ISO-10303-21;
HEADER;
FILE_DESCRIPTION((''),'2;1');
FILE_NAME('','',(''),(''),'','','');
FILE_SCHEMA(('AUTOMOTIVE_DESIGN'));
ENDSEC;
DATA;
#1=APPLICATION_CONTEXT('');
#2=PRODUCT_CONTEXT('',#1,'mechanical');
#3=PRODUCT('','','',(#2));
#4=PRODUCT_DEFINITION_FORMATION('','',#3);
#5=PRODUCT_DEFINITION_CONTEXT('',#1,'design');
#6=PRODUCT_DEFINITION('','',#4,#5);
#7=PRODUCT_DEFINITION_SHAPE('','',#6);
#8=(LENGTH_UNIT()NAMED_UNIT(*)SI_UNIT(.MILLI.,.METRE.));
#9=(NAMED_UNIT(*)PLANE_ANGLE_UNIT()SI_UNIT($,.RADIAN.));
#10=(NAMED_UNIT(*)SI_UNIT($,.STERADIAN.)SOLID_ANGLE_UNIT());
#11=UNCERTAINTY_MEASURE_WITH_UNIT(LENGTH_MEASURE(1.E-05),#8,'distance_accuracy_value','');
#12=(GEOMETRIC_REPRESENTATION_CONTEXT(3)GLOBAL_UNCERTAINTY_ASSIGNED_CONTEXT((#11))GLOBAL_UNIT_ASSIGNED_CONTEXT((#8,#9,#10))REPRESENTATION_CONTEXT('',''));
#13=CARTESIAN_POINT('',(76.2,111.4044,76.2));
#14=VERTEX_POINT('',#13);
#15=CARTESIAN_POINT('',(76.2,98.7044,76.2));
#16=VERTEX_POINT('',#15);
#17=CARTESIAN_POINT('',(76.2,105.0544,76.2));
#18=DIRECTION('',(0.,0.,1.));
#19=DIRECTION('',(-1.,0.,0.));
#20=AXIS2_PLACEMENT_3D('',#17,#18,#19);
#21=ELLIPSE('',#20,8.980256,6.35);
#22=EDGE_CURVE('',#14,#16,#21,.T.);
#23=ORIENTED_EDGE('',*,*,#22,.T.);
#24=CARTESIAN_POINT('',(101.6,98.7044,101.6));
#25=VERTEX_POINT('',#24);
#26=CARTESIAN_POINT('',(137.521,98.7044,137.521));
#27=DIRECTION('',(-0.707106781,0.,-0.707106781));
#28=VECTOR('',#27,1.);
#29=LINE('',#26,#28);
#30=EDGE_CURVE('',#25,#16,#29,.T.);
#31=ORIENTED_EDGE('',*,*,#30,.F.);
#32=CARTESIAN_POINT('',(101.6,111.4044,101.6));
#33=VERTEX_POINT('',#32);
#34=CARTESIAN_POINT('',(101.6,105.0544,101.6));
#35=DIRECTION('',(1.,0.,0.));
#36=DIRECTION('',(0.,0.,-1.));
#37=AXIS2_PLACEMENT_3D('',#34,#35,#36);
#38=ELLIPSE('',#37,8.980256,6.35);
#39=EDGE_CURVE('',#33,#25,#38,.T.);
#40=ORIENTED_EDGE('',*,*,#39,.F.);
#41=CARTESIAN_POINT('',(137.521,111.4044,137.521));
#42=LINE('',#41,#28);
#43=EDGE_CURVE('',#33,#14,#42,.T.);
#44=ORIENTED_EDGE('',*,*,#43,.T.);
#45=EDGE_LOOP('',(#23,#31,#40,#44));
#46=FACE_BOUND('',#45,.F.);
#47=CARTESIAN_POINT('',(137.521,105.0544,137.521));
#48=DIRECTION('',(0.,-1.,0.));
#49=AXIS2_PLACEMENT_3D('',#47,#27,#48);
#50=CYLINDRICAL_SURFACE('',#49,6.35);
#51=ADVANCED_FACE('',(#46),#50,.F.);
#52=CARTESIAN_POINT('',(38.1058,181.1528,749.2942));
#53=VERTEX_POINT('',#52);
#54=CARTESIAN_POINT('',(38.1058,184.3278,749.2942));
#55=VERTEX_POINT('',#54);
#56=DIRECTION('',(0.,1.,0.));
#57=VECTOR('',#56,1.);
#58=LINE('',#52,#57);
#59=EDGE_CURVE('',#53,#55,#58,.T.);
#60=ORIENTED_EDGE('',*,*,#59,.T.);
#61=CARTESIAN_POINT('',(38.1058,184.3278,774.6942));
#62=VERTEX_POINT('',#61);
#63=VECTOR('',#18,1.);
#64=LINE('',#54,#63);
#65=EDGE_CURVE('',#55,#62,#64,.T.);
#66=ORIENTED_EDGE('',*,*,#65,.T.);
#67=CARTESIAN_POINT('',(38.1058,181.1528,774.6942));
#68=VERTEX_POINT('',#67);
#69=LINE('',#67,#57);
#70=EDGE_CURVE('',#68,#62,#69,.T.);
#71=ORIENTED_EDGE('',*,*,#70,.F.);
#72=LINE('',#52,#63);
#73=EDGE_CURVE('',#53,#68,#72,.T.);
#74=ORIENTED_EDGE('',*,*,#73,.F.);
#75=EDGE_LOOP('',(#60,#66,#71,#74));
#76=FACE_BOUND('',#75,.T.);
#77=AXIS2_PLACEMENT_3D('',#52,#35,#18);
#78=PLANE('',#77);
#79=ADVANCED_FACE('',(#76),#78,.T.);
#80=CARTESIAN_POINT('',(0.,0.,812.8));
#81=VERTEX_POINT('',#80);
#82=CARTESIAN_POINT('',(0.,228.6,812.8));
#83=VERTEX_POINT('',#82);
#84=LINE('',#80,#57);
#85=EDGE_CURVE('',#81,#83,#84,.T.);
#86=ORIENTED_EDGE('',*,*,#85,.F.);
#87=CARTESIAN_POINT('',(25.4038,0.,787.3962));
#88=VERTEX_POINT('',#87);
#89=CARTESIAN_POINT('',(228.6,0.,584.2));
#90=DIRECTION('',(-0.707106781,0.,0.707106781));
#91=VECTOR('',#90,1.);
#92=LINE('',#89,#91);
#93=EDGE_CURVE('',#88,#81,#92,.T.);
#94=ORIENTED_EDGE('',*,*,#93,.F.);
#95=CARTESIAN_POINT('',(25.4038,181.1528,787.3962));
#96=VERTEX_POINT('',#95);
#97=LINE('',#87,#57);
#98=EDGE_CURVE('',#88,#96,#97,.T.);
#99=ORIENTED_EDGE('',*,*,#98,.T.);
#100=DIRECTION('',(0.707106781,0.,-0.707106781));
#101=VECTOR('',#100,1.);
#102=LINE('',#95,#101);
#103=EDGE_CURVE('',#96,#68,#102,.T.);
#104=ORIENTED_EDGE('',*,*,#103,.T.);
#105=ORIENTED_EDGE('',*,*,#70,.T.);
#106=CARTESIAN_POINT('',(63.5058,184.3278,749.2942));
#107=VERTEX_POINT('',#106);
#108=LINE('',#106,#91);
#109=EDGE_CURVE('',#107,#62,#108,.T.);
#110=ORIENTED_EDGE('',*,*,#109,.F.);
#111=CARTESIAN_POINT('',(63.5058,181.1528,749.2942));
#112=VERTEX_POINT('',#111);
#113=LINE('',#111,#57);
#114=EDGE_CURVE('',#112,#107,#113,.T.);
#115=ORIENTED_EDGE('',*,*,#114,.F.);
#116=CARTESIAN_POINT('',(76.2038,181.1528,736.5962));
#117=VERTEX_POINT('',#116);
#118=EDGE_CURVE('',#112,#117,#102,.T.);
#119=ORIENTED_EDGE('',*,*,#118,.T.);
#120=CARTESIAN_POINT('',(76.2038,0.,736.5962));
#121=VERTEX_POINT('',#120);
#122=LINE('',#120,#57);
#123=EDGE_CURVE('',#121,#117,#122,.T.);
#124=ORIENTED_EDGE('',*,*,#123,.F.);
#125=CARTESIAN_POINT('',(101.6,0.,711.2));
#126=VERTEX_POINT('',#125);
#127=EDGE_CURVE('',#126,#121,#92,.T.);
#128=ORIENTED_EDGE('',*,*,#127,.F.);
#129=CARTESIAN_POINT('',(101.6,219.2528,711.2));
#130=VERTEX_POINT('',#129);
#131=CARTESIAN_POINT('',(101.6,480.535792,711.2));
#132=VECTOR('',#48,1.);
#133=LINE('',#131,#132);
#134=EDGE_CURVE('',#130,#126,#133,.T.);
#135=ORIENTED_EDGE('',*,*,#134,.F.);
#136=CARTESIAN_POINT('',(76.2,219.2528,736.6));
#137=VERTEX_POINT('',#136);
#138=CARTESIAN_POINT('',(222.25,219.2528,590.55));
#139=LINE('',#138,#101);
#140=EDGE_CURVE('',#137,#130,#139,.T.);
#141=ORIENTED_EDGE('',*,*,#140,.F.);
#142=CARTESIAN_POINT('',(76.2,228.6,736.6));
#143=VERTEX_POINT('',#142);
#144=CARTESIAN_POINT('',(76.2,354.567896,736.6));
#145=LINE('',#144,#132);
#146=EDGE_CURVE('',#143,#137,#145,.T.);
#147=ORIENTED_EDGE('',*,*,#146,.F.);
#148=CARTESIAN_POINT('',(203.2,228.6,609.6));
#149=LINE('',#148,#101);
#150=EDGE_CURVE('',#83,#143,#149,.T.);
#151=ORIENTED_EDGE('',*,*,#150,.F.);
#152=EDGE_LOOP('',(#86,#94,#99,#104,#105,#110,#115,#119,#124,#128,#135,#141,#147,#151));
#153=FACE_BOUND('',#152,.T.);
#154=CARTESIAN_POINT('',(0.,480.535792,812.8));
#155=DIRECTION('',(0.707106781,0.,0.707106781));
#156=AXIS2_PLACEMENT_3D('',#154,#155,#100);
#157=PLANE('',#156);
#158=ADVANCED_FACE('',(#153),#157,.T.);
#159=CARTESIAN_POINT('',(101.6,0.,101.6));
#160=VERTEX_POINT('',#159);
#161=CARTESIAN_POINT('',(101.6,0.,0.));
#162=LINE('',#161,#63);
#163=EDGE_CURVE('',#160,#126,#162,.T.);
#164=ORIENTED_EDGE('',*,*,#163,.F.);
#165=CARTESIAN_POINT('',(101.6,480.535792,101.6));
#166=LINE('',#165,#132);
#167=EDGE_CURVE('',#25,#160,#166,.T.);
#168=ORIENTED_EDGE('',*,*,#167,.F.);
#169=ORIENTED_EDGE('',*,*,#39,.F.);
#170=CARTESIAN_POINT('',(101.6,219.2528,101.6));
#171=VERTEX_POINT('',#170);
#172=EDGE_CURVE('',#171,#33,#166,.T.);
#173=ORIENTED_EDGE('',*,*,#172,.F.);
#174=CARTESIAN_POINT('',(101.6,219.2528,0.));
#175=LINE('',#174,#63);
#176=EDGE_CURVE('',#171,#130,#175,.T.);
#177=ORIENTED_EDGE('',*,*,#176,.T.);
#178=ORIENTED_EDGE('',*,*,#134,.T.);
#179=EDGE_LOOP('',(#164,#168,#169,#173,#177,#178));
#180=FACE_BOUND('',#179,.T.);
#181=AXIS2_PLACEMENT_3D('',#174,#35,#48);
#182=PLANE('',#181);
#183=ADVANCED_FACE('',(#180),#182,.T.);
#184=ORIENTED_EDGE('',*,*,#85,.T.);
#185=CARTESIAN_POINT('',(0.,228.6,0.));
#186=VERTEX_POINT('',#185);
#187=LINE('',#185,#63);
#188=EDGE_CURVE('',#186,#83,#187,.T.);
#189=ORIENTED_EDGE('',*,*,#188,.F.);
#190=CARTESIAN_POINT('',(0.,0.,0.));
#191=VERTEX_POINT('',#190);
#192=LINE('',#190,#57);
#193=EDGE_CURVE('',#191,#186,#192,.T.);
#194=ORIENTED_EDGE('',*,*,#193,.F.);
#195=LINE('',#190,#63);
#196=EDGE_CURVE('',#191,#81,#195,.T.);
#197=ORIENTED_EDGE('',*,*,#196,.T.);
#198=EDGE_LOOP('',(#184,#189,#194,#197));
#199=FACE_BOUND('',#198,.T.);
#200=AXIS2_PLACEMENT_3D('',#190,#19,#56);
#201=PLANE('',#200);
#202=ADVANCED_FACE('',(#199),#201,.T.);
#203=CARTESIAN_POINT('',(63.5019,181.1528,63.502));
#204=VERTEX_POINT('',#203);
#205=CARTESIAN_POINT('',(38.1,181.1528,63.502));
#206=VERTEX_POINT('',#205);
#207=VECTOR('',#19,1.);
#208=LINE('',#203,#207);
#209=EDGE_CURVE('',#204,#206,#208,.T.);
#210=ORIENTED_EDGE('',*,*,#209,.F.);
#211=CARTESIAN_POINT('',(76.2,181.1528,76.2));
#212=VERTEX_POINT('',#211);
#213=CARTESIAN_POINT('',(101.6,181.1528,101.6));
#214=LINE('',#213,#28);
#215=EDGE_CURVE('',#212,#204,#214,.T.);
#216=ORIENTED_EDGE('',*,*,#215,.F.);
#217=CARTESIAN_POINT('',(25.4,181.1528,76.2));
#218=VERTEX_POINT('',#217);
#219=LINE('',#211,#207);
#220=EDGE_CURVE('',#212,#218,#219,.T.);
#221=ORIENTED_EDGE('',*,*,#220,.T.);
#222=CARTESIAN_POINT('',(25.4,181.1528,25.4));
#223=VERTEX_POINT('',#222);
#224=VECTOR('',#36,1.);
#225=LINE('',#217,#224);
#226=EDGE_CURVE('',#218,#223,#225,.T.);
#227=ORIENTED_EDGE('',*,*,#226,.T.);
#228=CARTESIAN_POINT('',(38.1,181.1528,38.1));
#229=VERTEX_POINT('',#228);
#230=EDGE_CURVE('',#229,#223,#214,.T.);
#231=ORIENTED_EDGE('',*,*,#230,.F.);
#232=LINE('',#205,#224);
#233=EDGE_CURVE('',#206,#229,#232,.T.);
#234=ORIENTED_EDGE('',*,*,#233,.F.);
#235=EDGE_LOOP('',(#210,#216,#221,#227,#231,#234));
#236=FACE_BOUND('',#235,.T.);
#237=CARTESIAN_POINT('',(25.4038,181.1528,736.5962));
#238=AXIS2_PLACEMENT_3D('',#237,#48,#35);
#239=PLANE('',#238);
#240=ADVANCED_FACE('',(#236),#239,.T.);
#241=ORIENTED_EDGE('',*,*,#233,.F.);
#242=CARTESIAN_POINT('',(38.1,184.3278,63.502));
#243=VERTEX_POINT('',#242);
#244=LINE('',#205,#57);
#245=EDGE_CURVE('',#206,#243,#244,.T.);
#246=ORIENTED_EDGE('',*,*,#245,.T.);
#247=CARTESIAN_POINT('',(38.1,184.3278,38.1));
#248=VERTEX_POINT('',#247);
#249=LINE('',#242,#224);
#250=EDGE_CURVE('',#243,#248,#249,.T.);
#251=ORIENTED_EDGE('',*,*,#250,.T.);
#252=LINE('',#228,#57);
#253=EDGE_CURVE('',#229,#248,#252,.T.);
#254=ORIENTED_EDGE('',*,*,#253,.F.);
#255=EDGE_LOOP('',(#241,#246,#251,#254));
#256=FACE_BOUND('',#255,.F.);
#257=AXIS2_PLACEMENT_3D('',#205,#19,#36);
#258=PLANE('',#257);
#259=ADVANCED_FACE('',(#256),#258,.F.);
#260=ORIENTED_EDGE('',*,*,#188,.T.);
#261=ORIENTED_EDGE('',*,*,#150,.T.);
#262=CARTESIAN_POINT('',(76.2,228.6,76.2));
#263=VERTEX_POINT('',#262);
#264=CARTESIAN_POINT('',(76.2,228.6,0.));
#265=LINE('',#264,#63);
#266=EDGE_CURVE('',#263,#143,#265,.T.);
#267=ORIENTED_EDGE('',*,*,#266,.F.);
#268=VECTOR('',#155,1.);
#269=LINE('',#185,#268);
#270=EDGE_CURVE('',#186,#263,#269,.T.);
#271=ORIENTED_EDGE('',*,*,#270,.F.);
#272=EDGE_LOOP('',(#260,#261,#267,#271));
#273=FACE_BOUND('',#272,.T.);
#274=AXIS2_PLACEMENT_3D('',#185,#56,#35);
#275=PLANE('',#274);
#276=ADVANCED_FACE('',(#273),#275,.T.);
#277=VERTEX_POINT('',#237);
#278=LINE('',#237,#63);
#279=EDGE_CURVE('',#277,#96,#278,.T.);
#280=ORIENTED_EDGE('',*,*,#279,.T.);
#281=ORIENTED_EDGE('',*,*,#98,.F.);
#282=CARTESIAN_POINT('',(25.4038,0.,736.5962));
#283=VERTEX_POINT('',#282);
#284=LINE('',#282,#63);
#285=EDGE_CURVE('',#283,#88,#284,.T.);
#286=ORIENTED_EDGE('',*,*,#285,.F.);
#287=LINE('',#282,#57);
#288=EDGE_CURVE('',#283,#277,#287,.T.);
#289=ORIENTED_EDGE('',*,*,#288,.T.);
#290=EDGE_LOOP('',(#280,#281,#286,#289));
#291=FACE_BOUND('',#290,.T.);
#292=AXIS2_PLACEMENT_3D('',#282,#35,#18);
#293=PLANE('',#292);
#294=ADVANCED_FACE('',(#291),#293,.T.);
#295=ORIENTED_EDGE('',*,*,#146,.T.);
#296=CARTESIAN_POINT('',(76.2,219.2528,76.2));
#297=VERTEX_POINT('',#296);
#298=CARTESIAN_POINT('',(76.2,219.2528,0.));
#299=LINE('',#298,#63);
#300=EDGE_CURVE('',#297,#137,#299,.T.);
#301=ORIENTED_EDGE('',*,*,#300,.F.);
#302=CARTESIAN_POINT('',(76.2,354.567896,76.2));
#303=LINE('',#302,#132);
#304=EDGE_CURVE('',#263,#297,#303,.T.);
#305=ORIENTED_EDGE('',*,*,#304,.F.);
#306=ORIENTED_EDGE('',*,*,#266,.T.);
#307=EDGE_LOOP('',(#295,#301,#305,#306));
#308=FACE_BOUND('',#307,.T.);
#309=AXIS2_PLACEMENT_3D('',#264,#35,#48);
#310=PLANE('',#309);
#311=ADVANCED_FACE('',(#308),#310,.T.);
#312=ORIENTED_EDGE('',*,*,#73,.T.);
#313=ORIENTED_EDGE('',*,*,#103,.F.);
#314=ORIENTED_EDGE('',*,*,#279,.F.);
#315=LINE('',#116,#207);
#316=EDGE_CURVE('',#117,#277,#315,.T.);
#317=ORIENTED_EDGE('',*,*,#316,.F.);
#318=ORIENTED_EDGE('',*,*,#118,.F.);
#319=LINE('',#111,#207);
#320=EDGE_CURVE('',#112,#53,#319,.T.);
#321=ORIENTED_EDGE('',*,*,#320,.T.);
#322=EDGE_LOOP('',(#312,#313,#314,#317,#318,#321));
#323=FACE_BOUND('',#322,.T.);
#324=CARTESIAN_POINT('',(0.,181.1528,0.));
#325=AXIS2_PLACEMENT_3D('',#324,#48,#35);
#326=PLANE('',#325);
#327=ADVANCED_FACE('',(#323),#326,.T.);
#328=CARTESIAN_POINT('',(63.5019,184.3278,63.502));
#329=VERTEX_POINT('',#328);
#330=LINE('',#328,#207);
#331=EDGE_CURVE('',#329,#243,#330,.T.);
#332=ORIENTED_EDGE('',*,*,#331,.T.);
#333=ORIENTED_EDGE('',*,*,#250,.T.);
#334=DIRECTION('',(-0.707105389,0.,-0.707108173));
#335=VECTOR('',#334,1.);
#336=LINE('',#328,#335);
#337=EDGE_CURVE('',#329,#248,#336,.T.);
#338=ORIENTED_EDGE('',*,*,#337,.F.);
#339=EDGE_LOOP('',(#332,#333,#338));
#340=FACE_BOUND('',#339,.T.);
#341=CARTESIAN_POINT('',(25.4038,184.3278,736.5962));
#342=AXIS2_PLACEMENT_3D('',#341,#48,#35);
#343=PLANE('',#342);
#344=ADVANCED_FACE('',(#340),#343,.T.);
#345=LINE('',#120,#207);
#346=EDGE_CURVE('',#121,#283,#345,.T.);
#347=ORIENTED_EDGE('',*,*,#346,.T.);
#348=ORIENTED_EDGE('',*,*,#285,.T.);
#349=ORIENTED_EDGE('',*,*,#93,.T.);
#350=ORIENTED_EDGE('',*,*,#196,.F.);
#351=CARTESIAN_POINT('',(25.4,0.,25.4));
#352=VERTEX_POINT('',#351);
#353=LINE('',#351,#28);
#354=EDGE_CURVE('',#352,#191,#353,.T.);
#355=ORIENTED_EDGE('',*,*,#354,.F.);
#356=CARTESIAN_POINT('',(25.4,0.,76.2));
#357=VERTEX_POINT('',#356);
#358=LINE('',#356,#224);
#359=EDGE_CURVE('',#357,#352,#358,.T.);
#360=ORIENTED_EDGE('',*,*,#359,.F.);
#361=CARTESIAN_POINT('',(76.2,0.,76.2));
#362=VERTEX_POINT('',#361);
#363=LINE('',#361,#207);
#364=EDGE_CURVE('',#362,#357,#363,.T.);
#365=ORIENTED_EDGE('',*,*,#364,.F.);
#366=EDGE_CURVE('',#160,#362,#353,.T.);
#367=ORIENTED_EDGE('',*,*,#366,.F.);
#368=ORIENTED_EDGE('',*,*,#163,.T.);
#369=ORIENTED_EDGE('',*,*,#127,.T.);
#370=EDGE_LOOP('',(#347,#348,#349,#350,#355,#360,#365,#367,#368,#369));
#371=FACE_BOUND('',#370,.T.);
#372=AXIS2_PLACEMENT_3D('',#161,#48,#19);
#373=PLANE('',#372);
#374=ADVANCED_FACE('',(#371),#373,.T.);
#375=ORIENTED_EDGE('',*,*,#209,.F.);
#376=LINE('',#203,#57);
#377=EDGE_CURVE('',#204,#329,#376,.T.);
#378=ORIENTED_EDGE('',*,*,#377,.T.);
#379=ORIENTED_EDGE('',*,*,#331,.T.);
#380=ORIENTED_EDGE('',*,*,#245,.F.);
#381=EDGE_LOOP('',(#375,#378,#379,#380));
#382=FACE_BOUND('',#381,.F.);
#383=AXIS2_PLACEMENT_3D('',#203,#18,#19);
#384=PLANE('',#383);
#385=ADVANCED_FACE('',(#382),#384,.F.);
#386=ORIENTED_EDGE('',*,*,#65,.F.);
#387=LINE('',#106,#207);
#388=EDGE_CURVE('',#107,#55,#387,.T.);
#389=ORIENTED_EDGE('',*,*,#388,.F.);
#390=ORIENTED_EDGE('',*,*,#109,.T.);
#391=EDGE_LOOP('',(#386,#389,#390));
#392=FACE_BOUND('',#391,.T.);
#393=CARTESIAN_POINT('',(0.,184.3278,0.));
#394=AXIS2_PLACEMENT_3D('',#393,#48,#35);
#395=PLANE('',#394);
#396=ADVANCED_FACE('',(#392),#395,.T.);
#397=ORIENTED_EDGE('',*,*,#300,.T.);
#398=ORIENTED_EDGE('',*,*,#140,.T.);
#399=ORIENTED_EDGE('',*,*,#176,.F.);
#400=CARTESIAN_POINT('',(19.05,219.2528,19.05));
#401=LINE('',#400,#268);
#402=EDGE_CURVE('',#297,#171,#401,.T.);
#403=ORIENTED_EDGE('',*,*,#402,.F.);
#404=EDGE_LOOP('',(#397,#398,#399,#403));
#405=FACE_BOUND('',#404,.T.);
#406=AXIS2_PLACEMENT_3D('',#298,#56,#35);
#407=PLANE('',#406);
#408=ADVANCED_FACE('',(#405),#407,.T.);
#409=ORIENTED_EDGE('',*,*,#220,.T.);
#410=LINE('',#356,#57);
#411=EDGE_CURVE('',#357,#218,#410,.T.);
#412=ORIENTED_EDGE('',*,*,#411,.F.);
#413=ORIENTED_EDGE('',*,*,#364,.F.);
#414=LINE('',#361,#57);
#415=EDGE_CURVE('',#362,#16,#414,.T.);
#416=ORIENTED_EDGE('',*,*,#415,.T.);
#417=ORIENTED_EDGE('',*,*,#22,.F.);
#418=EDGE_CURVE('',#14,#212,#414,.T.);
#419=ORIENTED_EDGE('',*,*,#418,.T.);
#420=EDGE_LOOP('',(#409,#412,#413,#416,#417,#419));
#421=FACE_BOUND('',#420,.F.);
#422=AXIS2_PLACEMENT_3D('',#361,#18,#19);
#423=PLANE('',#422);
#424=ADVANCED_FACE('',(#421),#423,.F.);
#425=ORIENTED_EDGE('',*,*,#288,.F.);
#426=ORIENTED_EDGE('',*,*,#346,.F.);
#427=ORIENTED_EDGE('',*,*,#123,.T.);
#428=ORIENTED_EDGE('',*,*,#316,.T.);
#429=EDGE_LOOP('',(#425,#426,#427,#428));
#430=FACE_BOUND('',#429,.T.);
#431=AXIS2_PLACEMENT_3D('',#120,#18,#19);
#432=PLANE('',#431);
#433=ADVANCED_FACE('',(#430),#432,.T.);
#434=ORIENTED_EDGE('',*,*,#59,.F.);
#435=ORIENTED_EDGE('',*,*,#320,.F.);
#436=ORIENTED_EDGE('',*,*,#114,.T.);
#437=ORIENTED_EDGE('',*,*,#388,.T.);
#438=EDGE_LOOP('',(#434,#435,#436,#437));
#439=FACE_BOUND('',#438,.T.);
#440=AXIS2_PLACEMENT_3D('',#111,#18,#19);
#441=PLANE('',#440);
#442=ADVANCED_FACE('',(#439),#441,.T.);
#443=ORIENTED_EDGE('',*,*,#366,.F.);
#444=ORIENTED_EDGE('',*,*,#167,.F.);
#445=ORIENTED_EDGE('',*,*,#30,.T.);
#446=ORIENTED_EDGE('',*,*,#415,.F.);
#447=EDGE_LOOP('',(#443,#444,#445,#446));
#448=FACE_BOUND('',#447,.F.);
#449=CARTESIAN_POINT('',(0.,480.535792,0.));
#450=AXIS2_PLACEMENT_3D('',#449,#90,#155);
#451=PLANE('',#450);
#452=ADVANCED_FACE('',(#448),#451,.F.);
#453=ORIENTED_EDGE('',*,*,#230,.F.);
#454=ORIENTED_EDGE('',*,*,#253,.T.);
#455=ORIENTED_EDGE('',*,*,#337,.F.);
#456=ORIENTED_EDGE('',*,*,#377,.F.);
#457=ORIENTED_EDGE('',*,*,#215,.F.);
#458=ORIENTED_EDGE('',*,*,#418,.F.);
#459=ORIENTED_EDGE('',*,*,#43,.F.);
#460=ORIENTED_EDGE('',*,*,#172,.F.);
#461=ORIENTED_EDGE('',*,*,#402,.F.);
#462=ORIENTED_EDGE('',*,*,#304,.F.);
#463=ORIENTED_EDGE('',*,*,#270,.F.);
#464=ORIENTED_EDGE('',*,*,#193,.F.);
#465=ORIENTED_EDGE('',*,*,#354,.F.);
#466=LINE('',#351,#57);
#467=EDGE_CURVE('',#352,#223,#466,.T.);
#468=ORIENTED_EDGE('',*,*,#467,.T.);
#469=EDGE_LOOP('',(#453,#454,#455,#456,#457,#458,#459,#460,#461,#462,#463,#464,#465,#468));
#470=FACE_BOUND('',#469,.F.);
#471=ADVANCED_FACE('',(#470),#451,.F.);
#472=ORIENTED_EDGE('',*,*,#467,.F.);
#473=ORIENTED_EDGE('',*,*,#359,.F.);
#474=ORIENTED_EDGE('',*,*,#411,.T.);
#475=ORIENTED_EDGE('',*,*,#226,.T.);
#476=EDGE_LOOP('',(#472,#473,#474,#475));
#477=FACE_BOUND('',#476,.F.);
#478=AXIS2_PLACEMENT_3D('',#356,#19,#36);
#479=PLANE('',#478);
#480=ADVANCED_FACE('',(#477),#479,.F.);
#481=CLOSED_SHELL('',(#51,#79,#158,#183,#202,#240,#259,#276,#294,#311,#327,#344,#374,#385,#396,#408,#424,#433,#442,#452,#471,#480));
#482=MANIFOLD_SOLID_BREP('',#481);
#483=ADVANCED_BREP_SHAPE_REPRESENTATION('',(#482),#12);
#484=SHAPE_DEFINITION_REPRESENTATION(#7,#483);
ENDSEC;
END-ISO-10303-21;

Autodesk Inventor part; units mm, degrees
ref_plane "YZ Plane" through (0, 0, 0) normal (1, 0, 0) x (0, 1, 0)
ref_plane "XZ Plane" through (0, 0, 0) normal (0, 1, 0) x (-1, 0, 0)
sketch "Sketch1" plane through (0, 0, 0) normal (0, 0, 1) x (1, 0, 0)
  line L0 (0, 0) -> (0, 228.6)
  line L1 (0, 228.6) -> (76.2, 228.6)
  line L2 (76.2, 228.6) -> (76.2, 219.2528)
  line L3 (76.2, 219.2528) -> (101.6, 219.2528)
  line L4 (101.6, 219.2528) -> (101.6, 0)
  line L5 (101.6, 0) -> (0, 0)
  dimension "d0" = 228.6
  dimension "d1" = 76.2
  dimension "d2" = 9.3472
  dimension "d3" = 25.4
extrude "Extrusion1" add sketch "Sketch1" along normal blind 812.8
sketch "Sketch6" plane through (0, 0, 0) normal (0, -1, 0) x (1, 0, 0)
  line L0 (101.6, 0) -> (101.6, 812.8) projected
  line L1 (0, 812.8) -> (101.6, 711.2) projected
  line L2 (76.2038, 736.5962) -> (25.4038, 736.5962)
  line L3 (25.4038, 736.5962) -> (25.4038, 787.3962)
  line L4 (25.4038, 787.3962) -> (76.2, 736.6)
  point P0 (0, 0)
  point P1 (101.6, 101.6)
  dimension "d31" = 35.9156
  dimension "d32" = 50.8
  dimension "d33" = 50.8
extrude "Extrusion4" cut sketch "Sketch6" against normal blind 181.1528
sketch "Sketch7" plane through (25.4038, 0, 736.5962) normal (0, -1, 0) x (1, 0, 0)
  line L0 (76.1962, -634.9962) -> (50.7962, -660.3962)
  line L1 (50.7962, -660.3962) -> (-0.0038, -660.3962)
  line L2 (76.1962, -634.9962) -> (-25.4038, -736.5962) projected
  line L3 (76.1962, -736.5962) -> (76.1962, 76.2038) projected
  line L4 (-0.0038, -660.3962) -> (-0.0038, -711.1962)
  line L5 (-0.0038, -711.1962) -> (50.7962, -660.3962)
  point P0 (76.1962, -25.3962)
  dimension "d39" = 50.8
  dimension "d41" = 90
  dimension "d42" = 50.8
extrude "Extrusion5" cut sketch "Sketch7" against normal blind 181.1528
chamfer "Chamfer5" distance 101.6 angle 45 1 edges at (101.6, 109.6264, 812.8)
chamfer "Chamfer6" distance 101.6 angle 45 1 edges at (101.6, 109.6264, 0)
ref_plane "Work Plane3" through (137.521, 56.9702, 137.521) normal (0.7071068, 0, 0.7071068) x (0, -1, 0)
sketch "Sketch9" plane through (137.521, 56.9702, 137.521) normal (0.7071068, 0, 0.7071068) x (0, -1, 0)
  line L0 (-162.2826, 0) -> (-162.2826, -466.9733) projected
  line L1 (-162.2826, 0) -> (-48.0842, 0)
  line L2 (-162.2826, 0) -> (56.9702, 0) projected
  dimension "d65" = 114.1984
hole "Hole2" at (137.521, 105.0544, 137.521) direction (-0.7071068, 0, -0.7071068) diameter 12.7 depth 127 tip angle 118
sketch "Sketch10" plane through (0, 181.1528, 0) normal (0, -1, 0) x (1, 0, 0)
  line L0 (76.2, 76.2) -> (76.2, 736.6) projected
  line L1 (76.2, 76.2) -> (63.5019, 63.5019)
  line L2 (0, 0) -> (76.2, 76.2) projected
  line L3 (63.5019, 63.5019) -> (38.1019, 63.5019)
  line L4 (38.1019, 63.5019) -> (38.1019, 38.1019)
  line L5 (63.5019, 63.5019) -> (38.1019, 38.1019)
  line L6 (76.2038, 736.5962) -> (63.5058, 749.2942)
  line L7 (63.5058, 749.2942) -> (38.1058, 749.2942)
  line L8 (38.1058, 749.2942) -> (38.1058, 774.6942)
  line L9 (63.5058, 749.2942) -> (38.1058, 774.6942)
  dimension "d73" = 17.9578
  dimension "d74" = 25.4
  dimension "d75" = 17.9578
  dimension "d76" = 25.4
extrude "Extrusion6" cut sketch "Sketch10" against normal blind 3.175 contours L7 L8 L9
sketch "Sketch11" plane through (25.4038, 181.1528, 736.5962) normal (0, -1, 0) x (1, 0, 0)
  line L0 (50.7962, -660.3962) -> (38.0981, -673.0942)
  line L1 (38.0981, -673.0942) -> (12.6962, -673.0942)
  line L2 (12.6962, -673.0942) -> (12.6962, -698.4962)
  line L3 (38.0981, -673.0942) -> (12.6962, -698.4962)
  line L4 (-25.4038, -736.5962) -> (50.7962, -660.3962) projected
  dimension "d79" = 17.9578
  dimension "d80" = 180
  dimension "d81" = 25.4019
  dimension "d82" = 25.4019
extrude "Extrusion7" cut sketch "Sketch11" against normal blind 3.175
properties part number "SideWidthOutlet" material "Wood (Birch)"
